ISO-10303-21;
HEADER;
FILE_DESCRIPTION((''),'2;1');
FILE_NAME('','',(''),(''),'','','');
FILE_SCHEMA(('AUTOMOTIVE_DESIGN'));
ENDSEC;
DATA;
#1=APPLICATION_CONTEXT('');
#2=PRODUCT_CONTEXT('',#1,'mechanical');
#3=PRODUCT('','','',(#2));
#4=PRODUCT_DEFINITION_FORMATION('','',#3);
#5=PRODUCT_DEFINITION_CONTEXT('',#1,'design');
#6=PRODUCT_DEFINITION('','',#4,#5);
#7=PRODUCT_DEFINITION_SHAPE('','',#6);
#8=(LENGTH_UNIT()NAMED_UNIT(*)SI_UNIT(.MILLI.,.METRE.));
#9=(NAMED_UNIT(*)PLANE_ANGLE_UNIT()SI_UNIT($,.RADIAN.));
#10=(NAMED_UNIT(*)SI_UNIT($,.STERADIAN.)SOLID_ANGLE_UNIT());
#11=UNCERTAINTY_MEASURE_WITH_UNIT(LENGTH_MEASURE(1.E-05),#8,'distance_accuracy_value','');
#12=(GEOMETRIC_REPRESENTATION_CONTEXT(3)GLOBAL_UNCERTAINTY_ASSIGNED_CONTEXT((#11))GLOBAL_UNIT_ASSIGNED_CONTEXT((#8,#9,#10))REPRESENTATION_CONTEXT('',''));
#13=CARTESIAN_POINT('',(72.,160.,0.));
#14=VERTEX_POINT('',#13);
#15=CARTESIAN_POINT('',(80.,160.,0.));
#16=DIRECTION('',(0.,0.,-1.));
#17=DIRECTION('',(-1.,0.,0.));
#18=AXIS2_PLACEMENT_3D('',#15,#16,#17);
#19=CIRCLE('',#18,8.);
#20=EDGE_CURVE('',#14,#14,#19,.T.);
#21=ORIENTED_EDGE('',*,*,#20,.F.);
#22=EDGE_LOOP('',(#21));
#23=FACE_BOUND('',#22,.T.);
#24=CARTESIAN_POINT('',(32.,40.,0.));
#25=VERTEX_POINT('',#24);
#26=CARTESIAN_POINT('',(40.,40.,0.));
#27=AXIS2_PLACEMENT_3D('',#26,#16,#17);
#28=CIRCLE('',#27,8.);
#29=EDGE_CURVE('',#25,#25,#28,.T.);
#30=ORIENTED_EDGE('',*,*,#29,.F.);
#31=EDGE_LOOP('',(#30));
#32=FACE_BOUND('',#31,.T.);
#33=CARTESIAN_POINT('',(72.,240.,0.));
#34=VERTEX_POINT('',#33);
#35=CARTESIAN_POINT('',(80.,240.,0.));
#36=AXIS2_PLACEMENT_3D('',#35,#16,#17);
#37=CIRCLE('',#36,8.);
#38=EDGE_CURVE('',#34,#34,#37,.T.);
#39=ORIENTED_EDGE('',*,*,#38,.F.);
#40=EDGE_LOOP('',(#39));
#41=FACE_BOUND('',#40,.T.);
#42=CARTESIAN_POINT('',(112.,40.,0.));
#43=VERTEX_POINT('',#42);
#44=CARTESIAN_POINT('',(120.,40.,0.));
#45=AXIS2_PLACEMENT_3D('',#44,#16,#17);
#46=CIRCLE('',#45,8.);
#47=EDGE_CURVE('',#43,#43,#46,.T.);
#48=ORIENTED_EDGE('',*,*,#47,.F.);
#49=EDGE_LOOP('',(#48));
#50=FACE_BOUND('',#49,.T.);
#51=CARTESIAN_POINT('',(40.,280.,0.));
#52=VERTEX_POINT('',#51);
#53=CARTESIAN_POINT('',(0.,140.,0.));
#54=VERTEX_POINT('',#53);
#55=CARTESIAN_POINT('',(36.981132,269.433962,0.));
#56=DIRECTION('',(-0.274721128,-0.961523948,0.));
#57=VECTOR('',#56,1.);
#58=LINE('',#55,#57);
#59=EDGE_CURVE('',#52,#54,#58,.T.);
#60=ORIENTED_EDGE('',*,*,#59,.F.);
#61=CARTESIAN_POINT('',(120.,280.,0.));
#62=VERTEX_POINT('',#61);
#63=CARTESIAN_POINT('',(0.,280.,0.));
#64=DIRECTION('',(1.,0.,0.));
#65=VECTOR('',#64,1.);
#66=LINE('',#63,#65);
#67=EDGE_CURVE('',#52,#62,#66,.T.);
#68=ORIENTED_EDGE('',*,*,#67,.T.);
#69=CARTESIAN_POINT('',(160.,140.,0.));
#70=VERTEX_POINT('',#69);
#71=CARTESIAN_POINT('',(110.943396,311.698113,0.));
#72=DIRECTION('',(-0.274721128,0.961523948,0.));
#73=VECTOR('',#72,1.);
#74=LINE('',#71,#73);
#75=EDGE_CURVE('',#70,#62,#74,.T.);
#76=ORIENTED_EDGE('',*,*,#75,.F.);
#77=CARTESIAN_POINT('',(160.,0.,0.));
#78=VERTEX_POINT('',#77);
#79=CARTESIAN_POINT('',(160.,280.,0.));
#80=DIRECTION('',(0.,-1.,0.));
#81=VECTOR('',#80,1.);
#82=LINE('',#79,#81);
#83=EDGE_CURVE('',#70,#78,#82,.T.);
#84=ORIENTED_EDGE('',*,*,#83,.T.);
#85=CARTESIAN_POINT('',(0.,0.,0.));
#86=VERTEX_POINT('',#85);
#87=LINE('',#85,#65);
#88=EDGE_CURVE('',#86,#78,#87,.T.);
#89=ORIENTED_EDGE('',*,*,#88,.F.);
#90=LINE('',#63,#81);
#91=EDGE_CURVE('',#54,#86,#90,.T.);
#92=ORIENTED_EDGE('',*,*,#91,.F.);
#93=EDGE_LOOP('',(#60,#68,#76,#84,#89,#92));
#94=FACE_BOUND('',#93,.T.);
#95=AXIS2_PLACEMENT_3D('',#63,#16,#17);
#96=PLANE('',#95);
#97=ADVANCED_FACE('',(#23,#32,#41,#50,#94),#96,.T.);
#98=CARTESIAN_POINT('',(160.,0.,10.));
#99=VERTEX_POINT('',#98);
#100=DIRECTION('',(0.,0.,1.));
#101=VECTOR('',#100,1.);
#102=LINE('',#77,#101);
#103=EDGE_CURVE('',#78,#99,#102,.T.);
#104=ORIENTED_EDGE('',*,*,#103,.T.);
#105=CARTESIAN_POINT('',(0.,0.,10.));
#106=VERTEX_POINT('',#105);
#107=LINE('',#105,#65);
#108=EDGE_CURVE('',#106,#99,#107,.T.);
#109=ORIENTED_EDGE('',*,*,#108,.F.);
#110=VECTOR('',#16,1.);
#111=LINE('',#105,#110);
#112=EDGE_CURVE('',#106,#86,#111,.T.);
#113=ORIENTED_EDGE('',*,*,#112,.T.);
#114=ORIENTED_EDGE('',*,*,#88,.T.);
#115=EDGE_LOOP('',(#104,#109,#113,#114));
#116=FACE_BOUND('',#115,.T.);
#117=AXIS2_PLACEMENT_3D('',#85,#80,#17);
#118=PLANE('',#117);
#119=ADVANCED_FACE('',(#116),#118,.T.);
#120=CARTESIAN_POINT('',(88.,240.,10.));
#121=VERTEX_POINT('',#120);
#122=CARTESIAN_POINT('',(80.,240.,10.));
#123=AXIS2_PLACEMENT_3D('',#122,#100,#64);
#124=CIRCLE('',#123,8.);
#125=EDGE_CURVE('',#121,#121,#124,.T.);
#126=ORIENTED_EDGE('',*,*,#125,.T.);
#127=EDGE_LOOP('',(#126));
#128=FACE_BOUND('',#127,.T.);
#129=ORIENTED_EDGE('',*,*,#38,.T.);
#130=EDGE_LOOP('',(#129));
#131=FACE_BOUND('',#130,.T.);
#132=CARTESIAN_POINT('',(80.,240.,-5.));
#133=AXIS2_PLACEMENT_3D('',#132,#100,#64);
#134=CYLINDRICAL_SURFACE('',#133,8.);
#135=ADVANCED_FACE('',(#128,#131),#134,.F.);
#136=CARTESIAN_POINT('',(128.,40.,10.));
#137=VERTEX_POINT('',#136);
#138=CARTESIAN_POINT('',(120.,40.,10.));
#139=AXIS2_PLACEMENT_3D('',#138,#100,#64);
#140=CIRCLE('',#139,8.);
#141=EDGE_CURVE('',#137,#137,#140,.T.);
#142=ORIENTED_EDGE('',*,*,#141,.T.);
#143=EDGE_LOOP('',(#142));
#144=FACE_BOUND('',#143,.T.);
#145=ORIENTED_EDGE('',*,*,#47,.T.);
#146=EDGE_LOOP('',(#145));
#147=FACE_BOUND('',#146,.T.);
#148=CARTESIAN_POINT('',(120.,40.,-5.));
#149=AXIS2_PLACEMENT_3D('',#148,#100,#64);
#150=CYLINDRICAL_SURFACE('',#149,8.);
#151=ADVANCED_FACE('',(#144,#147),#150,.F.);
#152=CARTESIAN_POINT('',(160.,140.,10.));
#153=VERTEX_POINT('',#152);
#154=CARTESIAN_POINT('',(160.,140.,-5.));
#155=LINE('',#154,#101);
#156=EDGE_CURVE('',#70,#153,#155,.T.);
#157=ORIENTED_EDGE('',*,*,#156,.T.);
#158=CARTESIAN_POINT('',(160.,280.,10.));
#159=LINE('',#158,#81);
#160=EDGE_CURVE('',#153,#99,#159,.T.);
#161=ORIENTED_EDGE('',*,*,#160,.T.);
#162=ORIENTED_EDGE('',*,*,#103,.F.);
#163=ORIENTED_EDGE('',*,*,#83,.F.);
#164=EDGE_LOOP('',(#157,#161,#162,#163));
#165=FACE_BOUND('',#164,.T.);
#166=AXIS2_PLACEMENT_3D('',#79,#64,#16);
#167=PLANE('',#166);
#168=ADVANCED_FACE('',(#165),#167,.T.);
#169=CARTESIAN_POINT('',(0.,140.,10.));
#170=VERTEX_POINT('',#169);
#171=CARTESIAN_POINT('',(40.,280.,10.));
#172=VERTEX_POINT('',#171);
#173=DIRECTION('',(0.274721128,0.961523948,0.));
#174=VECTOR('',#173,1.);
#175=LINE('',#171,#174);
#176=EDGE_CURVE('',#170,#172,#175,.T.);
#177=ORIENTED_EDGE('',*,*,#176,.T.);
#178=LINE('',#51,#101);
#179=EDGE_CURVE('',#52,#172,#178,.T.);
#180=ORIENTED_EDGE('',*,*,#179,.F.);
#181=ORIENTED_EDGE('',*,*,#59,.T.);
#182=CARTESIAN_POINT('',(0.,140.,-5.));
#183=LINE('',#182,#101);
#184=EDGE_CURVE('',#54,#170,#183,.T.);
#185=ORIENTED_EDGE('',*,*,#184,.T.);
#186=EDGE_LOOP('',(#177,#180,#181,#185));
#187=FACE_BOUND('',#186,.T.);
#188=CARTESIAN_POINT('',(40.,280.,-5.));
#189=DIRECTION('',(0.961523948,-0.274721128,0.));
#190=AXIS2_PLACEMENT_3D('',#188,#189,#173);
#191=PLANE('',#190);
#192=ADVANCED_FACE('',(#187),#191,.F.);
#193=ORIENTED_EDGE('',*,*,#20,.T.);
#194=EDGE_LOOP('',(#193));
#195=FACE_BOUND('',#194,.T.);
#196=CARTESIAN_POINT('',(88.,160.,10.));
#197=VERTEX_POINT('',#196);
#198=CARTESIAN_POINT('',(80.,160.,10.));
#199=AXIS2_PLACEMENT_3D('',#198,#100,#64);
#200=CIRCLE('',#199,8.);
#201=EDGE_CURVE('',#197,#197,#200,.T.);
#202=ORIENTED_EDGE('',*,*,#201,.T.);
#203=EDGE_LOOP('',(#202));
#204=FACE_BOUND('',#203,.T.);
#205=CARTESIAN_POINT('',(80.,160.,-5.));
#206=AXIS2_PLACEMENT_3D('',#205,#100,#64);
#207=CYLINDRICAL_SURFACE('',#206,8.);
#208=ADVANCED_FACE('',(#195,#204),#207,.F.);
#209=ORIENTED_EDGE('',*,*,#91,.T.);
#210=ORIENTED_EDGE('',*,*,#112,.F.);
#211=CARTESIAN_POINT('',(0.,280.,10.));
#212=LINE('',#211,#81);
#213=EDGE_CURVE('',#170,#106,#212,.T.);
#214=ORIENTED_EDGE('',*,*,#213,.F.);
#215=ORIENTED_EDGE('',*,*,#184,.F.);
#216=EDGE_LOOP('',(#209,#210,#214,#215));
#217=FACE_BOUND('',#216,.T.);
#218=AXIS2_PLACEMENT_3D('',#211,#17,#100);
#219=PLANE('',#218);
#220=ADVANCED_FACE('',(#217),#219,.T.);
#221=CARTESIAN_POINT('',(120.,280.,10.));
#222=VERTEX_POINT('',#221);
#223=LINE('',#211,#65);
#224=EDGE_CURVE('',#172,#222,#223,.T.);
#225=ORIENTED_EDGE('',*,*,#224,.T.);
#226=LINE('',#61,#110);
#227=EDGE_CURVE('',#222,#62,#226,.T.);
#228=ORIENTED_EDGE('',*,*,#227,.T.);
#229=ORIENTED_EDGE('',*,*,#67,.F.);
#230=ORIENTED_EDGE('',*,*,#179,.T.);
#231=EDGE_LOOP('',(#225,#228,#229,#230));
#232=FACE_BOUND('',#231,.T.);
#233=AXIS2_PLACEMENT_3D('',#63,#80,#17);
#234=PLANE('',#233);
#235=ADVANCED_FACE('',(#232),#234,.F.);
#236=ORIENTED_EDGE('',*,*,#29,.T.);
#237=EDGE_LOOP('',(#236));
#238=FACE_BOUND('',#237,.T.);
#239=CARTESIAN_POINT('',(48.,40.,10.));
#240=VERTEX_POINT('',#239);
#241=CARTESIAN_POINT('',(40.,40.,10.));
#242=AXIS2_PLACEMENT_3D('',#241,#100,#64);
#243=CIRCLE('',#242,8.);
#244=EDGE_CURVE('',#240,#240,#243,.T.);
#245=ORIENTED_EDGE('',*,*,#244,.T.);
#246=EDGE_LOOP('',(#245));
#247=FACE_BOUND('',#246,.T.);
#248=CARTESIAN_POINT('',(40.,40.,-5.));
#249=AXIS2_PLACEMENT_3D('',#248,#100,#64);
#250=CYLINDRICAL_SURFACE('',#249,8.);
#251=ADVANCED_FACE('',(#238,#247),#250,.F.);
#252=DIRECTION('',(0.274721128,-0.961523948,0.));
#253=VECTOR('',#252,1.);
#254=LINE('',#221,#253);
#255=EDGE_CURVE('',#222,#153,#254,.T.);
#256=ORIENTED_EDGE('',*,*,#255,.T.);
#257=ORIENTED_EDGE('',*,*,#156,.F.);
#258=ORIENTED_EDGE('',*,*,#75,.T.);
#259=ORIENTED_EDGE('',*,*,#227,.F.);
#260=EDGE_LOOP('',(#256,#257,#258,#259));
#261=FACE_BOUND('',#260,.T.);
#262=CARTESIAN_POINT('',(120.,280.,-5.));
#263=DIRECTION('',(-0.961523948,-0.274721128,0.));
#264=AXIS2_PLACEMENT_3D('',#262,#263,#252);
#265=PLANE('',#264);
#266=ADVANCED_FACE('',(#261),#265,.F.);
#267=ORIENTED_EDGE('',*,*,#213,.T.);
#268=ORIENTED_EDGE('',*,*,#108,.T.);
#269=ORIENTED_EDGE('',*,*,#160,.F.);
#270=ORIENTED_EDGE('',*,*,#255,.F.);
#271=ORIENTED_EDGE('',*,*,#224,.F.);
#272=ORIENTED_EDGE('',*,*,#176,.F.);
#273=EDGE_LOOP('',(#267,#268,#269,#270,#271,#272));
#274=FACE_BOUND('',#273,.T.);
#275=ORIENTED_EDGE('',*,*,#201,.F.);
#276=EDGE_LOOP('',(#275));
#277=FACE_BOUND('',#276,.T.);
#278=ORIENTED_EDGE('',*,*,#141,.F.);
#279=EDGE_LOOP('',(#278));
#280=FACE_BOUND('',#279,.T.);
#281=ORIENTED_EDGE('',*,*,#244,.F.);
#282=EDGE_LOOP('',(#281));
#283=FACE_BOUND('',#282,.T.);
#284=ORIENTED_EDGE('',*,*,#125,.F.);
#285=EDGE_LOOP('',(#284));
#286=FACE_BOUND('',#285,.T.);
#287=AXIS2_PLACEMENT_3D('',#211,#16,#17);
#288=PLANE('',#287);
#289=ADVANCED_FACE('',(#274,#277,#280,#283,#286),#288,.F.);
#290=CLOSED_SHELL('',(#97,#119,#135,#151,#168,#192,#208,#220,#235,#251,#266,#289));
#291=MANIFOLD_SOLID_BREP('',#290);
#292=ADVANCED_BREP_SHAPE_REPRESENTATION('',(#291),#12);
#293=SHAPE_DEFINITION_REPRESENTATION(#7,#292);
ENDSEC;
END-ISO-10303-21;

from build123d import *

# Parameters (mm, degrees)
BASE_FLANGE1_OUTLINE_W = 160
BASE_FLANGE1_OUTLINE_H = 10
BASE_FLANGE1_DEPTH     = 280
CUT_EXTRUDE2_DEPTH     = 15
SKETCH16_R             = 8
CUT_EXTRUDE4_DEPTH     = 15


# Read off the part's stored shape, not the designer's step: Base-Flange1
with BuildPart() as part:
    # Base-Flange1 outline → Base-Flange1 (new body)
    with BuildSketch(Plane(origin=(0, 0, 0), x_dir=(1, 0, 0), z_dir=(0, 1, 0))):
        with Locations((80, -5)):
            Rectangle(BASE_FLANGE1_OUTLINE_W, BASE_FLANGE1_OUTLINE_H)
    extrude(amount=BASE_FLANGE1_DEPTH)

    # Sketch12 → Cut-Extrude2 (cut)
    with BuildSketch(Plane.XY.offset(10)):
        Polygon((160, 280), (120, 280), (160, 140), align=None)
        Polygon((0, 280), (40, 280), (0, 140), align=None)
    extrude(amount=-CUT_EXTRUDE2_DEPTH, mode=Mode.SUBTRACT)

    # Sketch16 → Cut-Extrude4 (cut)
    with BuildSketch(Plane.XY.offset(10)):
        with Locations((80, 240)):
            Circle(SKETCH16_R)
        with Locations((80, 160)):
            Circle(SKETCH16_R)
        with Locations((40, 40)):
            Circle(SKETCH16_R)
        with Locations((120, 40)):
            Circle(SKETCH16_R)
    extrude(amount=-CUT_EXTRUDE4_DEPTH, mode=Mode.SUBTRACT)


solid = part.part
